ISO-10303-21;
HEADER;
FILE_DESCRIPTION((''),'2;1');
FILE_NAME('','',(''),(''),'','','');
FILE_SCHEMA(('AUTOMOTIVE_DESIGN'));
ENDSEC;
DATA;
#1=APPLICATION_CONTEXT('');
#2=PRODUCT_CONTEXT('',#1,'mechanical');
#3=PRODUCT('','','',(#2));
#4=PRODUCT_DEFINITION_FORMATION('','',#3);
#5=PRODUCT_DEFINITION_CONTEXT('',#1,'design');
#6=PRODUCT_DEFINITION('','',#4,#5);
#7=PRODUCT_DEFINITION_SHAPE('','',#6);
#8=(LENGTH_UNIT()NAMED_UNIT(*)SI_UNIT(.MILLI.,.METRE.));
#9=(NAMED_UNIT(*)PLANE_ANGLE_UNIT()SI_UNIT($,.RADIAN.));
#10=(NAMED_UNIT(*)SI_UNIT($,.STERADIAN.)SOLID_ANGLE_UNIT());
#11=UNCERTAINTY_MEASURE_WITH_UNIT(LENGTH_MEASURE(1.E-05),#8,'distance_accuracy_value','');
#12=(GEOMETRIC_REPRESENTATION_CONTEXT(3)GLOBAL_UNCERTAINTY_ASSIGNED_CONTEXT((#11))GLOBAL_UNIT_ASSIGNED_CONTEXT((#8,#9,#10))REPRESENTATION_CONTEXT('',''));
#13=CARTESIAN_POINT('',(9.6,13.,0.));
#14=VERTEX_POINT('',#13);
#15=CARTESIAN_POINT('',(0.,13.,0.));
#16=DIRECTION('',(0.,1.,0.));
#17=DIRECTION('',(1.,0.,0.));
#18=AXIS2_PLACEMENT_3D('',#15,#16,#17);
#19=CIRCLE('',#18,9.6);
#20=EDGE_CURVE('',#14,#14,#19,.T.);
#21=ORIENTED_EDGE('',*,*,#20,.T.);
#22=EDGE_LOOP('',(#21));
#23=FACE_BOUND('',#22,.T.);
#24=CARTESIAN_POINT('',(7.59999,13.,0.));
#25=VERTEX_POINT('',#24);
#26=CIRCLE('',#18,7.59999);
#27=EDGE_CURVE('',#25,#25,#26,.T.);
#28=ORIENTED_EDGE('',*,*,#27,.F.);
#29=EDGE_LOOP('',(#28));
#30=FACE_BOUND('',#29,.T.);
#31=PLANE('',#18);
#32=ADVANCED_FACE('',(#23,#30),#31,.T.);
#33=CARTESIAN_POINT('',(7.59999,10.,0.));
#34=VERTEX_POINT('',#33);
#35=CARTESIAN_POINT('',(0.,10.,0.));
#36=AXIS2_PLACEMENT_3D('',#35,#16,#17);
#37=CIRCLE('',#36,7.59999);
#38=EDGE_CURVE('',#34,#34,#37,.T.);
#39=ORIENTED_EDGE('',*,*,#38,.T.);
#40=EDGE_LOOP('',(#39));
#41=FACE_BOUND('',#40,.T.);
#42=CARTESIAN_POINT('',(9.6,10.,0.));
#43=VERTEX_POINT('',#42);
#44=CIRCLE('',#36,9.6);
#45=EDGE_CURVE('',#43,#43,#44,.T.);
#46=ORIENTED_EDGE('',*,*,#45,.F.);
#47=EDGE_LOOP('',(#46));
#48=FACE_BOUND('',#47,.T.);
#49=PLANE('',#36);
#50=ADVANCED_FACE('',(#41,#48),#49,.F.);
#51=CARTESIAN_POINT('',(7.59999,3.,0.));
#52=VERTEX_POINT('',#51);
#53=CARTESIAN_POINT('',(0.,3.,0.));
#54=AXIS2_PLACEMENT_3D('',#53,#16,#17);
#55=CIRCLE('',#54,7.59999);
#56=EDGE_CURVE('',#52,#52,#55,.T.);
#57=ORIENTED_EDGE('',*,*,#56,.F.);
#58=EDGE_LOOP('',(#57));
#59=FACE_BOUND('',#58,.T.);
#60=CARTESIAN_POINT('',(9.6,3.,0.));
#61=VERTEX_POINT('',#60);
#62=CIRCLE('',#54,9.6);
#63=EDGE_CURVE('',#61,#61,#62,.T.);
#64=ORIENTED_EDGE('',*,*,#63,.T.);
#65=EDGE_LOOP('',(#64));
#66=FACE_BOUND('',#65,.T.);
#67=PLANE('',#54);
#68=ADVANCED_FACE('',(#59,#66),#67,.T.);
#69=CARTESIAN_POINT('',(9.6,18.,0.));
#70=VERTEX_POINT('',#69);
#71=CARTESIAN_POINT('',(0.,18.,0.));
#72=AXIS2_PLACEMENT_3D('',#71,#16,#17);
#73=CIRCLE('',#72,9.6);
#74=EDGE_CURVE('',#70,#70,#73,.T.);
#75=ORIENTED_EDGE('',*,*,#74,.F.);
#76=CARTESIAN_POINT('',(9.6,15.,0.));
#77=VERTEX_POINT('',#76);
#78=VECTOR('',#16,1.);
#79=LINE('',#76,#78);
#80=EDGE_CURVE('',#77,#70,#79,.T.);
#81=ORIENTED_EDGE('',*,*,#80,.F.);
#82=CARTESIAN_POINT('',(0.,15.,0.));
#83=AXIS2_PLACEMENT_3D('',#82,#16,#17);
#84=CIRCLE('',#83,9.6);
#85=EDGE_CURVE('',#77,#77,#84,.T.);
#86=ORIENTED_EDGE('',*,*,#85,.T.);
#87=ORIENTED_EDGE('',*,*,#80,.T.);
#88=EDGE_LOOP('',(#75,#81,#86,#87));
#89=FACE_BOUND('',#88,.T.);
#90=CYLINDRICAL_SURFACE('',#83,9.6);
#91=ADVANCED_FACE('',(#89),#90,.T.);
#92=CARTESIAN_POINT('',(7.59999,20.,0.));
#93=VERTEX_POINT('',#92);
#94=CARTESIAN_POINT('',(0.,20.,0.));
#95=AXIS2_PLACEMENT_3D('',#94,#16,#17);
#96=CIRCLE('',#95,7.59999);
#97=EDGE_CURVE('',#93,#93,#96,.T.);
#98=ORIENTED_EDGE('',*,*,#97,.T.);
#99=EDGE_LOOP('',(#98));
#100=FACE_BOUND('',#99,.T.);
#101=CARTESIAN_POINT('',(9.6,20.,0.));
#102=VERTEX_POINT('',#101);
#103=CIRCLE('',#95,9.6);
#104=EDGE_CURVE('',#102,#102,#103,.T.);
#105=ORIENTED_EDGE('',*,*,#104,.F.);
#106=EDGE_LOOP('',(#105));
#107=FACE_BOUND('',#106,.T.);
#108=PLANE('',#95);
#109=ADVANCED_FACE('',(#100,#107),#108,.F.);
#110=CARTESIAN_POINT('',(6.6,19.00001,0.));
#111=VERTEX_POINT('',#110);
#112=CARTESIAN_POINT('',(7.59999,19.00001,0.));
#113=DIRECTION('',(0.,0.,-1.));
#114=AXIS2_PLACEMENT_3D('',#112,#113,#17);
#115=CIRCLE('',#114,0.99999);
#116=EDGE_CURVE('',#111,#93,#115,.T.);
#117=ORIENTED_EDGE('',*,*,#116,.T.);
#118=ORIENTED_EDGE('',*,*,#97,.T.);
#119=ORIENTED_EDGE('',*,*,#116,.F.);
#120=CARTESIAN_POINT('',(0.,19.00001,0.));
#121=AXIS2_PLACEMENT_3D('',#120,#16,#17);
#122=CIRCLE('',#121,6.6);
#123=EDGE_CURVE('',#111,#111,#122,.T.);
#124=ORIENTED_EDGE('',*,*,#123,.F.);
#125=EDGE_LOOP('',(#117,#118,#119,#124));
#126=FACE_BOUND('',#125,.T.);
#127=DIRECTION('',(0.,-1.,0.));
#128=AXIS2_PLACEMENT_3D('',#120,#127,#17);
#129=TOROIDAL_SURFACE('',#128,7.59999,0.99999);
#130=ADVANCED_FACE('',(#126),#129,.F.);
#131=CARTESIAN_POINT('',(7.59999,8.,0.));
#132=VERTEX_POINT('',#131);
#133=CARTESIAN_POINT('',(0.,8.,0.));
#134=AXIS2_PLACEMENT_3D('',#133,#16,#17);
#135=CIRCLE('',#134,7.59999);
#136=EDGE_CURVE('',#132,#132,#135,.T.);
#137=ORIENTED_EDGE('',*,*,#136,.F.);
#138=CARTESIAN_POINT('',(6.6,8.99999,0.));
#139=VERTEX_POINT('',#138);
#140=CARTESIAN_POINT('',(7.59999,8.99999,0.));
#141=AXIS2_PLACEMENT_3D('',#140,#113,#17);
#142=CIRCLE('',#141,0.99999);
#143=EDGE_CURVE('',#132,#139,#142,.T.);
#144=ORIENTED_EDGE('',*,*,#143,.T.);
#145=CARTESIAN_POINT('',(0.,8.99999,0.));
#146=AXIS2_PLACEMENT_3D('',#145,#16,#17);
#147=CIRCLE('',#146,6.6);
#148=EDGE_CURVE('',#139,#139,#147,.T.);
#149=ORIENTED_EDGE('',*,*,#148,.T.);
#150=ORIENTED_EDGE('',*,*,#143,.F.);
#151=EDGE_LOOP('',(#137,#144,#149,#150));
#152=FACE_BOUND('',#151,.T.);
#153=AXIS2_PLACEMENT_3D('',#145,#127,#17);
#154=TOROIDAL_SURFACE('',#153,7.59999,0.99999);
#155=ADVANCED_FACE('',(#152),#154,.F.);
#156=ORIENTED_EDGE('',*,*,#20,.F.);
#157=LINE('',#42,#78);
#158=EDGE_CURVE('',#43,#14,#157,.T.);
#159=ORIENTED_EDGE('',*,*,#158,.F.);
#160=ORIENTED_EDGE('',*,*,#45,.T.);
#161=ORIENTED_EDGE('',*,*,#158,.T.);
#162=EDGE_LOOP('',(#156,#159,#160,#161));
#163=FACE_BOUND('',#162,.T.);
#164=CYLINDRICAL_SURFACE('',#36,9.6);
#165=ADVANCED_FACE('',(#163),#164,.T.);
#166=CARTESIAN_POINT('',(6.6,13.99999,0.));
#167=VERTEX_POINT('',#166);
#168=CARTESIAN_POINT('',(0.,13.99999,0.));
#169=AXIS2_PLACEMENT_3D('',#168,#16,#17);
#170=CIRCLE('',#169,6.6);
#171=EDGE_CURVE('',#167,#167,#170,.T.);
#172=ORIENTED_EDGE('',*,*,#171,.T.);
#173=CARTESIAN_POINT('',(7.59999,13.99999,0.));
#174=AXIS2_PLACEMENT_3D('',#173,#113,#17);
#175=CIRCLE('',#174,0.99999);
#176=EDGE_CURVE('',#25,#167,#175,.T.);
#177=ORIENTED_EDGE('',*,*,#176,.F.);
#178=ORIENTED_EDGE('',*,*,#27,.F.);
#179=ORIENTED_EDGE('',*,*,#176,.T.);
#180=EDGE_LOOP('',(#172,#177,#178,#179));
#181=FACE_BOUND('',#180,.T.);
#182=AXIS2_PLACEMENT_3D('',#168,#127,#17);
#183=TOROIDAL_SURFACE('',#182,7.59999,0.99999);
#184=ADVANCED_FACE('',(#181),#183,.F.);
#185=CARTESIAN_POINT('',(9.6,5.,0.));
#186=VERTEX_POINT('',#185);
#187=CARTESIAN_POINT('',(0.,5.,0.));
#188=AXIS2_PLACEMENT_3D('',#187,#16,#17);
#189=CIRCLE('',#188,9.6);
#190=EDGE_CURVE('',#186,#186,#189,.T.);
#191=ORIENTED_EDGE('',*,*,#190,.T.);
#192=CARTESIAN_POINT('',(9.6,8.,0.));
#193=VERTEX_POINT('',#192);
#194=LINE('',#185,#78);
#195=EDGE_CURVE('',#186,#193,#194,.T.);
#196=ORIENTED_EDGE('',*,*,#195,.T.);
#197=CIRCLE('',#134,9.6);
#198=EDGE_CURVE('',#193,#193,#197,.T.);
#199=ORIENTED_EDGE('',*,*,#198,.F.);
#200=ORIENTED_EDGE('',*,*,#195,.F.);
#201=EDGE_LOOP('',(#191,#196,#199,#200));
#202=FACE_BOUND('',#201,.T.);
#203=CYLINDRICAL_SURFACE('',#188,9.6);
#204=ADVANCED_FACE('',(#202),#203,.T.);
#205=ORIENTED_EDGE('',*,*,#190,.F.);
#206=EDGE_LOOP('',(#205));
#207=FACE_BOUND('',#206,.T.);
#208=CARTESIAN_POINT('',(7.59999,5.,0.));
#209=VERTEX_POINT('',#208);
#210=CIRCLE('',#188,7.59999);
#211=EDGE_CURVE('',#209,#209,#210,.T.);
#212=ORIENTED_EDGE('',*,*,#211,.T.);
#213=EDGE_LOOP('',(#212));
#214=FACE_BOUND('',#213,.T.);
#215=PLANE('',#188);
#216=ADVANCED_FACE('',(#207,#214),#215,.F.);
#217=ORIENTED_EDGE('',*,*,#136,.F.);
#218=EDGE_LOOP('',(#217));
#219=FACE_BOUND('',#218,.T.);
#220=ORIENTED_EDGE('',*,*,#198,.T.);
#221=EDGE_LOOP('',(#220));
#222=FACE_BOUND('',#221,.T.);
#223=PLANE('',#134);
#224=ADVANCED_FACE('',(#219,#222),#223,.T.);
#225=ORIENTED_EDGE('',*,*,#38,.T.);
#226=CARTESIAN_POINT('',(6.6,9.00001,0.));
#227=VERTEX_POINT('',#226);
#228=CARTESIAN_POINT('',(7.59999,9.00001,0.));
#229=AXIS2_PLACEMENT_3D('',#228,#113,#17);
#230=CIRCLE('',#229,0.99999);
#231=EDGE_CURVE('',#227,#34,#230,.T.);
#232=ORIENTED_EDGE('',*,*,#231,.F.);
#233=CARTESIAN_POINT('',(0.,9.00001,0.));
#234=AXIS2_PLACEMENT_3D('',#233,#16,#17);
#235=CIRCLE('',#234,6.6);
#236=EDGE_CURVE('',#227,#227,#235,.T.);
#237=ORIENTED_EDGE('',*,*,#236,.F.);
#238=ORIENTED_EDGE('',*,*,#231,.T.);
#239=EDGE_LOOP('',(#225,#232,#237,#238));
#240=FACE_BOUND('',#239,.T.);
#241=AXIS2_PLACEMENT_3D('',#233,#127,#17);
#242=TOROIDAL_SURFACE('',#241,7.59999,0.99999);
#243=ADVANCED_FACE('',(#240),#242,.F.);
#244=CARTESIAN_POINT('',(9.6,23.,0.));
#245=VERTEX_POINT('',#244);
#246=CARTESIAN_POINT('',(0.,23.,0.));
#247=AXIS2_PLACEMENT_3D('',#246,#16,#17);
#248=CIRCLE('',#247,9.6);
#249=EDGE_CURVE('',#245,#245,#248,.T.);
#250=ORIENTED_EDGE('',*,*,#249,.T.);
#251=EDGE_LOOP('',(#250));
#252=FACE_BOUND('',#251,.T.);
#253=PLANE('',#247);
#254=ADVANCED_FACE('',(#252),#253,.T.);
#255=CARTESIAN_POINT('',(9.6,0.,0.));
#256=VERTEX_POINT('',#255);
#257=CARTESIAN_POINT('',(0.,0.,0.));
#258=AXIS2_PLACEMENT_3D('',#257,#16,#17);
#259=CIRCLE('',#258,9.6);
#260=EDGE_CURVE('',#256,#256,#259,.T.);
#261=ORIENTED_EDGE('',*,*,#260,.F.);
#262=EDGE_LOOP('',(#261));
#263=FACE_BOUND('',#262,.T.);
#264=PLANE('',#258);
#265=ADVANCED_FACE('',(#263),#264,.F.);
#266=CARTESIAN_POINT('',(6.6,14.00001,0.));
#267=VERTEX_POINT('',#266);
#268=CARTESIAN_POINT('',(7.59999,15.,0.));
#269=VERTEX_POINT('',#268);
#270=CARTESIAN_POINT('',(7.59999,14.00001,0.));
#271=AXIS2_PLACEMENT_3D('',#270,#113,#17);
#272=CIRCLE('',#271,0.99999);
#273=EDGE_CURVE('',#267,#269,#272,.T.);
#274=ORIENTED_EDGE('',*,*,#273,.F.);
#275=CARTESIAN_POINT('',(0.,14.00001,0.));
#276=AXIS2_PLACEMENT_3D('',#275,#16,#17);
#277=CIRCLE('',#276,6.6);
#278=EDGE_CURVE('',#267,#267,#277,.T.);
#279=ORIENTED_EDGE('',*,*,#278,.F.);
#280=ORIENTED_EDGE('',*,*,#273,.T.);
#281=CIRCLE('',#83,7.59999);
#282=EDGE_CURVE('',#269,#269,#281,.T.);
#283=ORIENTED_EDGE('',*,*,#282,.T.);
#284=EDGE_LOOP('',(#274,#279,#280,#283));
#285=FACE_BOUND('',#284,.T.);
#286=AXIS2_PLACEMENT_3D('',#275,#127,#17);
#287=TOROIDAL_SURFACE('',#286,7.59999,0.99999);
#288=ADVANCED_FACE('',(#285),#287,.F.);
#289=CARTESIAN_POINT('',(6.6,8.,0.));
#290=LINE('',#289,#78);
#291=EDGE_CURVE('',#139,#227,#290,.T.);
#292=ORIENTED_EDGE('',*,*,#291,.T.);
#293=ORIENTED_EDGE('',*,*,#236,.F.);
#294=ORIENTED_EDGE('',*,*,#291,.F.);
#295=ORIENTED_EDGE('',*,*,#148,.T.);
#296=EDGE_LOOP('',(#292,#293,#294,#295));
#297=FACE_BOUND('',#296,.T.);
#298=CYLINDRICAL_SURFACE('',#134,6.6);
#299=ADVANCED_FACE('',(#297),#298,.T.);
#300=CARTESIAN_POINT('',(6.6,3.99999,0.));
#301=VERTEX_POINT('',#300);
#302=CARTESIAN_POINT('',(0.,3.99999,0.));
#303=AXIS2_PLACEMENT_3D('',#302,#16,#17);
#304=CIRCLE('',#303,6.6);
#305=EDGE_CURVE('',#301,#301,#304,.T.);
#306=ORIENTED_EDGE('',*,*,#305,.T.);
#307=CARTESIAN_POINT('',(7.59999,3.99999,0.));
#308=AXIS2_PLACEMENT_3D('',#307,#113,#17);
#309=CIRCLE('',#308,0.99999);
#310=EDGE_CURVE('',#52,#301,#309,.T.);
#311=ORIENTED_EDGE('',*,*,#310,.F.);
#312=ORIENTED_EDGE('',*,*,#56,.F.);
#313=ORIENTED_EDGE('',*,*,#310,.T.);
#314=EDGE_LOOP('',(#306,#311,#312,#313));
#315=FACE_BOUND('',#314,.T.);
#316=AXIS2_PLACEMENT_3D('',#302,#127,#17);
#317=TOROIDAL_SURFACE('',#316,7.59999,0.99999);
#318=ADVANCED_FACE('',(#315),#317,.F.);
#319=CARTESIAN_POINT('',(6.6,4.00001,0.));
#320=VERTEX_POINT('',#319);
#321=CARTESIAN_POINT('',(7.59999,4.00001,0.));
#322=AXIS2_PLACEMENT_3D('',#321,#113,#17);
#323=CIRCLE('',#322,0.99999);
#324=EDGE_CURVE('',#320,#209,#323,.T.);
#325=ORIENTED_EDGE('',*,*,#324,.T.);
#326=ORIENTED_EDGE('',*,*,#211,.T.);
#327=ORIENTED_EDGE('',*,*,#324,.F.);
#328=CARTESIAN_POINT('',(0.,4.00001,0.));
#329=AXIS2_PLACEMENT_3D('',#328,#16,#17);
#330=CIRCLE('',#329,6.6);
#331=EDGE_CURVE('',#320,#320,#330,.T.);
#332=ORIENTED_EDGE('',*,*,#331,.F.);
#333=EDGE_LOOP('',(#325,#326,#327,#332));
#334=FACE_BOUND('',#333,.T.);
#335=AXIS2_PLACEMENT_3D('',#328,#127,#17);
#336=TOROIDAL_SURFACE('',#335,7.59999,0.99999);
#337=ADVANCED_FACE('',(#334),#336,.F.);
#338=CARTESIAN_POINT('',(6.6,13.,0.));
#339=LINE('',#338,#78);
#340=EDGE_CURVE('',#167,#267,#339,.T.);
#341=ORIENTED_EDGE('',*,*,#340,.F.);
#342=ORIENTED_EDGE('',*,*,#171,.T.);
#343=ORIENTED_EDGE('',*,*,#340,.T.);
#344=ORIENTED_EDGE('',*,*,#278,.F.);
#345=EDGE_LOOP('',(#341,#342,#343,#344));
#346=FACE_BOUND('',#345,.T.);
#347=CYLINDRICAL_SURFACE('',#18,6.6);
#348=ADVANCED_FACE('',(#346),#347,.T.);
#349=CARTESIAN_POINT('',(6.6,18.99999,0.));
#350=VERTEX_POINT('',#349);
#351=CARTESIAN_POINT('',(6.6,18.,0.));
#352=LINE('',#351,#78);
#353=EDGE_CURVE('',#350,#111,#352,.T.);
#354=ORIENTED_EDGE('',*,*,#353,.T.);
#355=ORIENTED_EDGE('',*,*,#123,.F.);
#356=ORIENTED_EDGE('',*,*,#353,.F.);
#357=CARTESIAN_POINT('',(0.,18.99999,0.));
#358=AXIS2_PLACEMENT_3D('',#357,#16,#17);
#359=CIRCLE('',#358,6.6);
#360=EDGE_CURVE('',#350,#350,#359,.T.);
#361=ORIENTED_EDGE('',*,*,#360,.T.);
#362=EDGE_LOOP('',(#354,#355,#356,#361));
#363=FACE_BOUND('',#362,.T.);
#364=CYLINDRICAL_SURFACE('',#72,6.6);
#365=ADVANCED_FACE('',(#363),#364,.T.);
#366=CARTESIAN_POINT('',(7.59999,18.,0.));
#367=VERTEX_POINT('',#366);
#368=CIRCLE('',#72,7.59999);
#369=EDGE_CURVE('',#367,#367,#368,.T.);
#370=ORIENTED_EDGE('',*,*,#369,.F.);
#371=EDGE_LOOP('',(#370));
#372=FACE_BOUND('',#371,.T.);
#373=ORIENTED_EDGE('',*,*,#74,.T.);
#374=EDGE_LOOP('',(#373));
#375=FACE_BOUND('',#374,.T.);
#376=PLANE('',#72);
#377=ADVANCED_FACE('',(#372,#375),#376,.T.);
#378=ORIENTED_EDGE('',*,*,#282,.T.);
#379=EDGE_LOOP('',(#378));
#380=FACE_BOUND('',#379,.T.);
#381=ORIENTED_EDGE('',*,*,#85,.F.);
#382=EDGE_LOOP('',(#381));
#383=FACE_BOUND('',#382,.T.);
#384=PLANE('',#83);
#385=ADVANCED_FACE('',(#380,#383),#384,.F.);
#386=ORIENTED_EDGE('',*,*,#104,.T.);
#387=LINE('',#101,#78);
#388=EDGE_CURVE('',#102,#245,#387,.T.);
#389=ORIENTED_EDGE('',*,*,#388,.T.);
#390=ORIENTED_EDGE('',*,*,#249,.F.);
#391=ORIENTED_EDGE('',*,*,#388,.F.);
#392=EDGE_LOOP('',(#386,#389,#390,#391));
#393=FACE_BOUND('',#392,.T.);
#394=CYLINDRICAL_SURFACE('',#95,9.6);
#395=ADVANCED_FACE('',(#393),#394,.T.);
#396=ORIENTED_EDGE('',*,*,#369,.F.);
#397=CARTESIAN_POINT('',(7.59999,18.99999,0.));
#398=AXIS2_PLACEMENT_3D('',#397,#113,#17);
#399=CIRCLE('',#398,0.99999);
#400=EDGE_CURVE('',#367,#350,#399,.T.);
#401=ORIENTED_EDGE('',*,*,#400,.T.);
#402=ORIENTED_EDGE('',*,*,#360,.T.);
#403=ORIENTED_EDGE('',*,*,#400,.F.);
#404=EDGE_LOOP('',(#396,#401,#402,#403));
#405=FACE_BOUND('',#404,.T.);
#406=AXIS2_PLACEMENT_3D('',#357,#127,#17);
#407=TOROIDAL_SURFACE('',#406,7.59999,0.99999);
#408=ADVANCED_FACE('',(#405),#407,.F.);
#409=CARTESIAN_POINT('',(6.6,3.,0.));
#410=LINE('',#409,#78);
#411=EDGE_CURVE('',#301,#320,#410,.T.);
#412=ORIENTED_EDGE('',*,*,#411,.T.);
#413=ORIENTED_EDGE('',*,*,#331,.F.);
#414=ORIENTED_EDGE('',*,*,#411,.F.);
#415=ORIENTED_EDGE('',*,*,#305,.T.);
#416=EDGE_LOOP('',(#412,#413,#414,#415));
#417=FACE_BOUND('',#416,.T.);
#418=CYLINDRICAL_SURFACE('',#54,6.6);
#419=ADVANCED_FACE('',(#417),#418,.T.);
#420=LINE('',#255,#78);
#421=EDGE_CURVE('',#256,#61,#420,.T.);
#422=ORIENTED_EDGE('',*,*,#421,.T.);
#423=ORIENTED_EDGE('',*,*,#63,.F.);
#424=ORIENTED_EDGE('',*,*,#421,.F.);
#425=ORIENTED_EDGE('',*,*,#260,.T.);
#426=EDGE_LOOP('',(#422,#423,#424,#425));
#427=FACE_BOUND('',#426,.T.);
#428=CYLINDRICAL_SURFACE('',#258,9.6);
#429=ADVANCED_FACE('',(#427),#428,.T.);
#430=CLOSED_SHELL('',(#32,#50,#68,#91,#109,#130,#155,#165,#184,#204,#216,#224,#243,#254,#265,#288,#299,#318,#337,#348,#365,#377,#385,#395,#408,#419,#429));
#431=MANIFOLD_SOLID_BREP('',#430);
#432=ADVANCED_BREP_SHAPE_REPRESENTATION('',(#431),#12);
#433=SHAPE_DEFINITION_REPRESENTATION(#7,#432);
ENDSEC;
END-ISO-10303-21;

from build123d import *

# Parameters (mm, degrees)
F2_R = 0.99999


# Not quite as in the source:
# - a fillet or chamfer is up to 0.001 mm smaller than in the source, because OpenCascade refuses the exact size
# - a feature names something its author has since deleted; it is built from what else it names


with BuildPart() as f1:
    # F0 (on Top) → F1 (revolve)
    with BuildSketch(Plane.XY):
        Polygon((0, 23), (0, 0), (9.6, 0), (9.6, 3), (6.6, 3), (6.6, 5), (9.6, 5), (9.6, 8), (6.6, 8), (6.6, 10), (9.6, 10), (9.6, 13), (6.6, 13), (6.6, 15), (9.6, 15), (9.6, 18), (6.6, 18), (6.6, 20), (9.6, 20), (9.6, 23), align=None)
    revolve(axis=Axis((0, 11.5, 0), (0, 1, 0)))

    # F2 (radius 1 in the source; OpenCascade refuses exactly that, so slightly less here)
    f2_edges = [f1.edges().sort_by_distance(p)[0] for p in [
        (-6.6, 20, 0),
        (-6.6, 15, 0),
        (-6.6, 10, 0),
        (-6.6, 5, 0),
        (-6.6, 3, 0),
        (-6.6, 8, 0),
        (-6.6, 13, 0),
        (-6.6, 18, 0),
    ]]
    fillet(f2_edges, radius=F2_R)


solid = f1.part
